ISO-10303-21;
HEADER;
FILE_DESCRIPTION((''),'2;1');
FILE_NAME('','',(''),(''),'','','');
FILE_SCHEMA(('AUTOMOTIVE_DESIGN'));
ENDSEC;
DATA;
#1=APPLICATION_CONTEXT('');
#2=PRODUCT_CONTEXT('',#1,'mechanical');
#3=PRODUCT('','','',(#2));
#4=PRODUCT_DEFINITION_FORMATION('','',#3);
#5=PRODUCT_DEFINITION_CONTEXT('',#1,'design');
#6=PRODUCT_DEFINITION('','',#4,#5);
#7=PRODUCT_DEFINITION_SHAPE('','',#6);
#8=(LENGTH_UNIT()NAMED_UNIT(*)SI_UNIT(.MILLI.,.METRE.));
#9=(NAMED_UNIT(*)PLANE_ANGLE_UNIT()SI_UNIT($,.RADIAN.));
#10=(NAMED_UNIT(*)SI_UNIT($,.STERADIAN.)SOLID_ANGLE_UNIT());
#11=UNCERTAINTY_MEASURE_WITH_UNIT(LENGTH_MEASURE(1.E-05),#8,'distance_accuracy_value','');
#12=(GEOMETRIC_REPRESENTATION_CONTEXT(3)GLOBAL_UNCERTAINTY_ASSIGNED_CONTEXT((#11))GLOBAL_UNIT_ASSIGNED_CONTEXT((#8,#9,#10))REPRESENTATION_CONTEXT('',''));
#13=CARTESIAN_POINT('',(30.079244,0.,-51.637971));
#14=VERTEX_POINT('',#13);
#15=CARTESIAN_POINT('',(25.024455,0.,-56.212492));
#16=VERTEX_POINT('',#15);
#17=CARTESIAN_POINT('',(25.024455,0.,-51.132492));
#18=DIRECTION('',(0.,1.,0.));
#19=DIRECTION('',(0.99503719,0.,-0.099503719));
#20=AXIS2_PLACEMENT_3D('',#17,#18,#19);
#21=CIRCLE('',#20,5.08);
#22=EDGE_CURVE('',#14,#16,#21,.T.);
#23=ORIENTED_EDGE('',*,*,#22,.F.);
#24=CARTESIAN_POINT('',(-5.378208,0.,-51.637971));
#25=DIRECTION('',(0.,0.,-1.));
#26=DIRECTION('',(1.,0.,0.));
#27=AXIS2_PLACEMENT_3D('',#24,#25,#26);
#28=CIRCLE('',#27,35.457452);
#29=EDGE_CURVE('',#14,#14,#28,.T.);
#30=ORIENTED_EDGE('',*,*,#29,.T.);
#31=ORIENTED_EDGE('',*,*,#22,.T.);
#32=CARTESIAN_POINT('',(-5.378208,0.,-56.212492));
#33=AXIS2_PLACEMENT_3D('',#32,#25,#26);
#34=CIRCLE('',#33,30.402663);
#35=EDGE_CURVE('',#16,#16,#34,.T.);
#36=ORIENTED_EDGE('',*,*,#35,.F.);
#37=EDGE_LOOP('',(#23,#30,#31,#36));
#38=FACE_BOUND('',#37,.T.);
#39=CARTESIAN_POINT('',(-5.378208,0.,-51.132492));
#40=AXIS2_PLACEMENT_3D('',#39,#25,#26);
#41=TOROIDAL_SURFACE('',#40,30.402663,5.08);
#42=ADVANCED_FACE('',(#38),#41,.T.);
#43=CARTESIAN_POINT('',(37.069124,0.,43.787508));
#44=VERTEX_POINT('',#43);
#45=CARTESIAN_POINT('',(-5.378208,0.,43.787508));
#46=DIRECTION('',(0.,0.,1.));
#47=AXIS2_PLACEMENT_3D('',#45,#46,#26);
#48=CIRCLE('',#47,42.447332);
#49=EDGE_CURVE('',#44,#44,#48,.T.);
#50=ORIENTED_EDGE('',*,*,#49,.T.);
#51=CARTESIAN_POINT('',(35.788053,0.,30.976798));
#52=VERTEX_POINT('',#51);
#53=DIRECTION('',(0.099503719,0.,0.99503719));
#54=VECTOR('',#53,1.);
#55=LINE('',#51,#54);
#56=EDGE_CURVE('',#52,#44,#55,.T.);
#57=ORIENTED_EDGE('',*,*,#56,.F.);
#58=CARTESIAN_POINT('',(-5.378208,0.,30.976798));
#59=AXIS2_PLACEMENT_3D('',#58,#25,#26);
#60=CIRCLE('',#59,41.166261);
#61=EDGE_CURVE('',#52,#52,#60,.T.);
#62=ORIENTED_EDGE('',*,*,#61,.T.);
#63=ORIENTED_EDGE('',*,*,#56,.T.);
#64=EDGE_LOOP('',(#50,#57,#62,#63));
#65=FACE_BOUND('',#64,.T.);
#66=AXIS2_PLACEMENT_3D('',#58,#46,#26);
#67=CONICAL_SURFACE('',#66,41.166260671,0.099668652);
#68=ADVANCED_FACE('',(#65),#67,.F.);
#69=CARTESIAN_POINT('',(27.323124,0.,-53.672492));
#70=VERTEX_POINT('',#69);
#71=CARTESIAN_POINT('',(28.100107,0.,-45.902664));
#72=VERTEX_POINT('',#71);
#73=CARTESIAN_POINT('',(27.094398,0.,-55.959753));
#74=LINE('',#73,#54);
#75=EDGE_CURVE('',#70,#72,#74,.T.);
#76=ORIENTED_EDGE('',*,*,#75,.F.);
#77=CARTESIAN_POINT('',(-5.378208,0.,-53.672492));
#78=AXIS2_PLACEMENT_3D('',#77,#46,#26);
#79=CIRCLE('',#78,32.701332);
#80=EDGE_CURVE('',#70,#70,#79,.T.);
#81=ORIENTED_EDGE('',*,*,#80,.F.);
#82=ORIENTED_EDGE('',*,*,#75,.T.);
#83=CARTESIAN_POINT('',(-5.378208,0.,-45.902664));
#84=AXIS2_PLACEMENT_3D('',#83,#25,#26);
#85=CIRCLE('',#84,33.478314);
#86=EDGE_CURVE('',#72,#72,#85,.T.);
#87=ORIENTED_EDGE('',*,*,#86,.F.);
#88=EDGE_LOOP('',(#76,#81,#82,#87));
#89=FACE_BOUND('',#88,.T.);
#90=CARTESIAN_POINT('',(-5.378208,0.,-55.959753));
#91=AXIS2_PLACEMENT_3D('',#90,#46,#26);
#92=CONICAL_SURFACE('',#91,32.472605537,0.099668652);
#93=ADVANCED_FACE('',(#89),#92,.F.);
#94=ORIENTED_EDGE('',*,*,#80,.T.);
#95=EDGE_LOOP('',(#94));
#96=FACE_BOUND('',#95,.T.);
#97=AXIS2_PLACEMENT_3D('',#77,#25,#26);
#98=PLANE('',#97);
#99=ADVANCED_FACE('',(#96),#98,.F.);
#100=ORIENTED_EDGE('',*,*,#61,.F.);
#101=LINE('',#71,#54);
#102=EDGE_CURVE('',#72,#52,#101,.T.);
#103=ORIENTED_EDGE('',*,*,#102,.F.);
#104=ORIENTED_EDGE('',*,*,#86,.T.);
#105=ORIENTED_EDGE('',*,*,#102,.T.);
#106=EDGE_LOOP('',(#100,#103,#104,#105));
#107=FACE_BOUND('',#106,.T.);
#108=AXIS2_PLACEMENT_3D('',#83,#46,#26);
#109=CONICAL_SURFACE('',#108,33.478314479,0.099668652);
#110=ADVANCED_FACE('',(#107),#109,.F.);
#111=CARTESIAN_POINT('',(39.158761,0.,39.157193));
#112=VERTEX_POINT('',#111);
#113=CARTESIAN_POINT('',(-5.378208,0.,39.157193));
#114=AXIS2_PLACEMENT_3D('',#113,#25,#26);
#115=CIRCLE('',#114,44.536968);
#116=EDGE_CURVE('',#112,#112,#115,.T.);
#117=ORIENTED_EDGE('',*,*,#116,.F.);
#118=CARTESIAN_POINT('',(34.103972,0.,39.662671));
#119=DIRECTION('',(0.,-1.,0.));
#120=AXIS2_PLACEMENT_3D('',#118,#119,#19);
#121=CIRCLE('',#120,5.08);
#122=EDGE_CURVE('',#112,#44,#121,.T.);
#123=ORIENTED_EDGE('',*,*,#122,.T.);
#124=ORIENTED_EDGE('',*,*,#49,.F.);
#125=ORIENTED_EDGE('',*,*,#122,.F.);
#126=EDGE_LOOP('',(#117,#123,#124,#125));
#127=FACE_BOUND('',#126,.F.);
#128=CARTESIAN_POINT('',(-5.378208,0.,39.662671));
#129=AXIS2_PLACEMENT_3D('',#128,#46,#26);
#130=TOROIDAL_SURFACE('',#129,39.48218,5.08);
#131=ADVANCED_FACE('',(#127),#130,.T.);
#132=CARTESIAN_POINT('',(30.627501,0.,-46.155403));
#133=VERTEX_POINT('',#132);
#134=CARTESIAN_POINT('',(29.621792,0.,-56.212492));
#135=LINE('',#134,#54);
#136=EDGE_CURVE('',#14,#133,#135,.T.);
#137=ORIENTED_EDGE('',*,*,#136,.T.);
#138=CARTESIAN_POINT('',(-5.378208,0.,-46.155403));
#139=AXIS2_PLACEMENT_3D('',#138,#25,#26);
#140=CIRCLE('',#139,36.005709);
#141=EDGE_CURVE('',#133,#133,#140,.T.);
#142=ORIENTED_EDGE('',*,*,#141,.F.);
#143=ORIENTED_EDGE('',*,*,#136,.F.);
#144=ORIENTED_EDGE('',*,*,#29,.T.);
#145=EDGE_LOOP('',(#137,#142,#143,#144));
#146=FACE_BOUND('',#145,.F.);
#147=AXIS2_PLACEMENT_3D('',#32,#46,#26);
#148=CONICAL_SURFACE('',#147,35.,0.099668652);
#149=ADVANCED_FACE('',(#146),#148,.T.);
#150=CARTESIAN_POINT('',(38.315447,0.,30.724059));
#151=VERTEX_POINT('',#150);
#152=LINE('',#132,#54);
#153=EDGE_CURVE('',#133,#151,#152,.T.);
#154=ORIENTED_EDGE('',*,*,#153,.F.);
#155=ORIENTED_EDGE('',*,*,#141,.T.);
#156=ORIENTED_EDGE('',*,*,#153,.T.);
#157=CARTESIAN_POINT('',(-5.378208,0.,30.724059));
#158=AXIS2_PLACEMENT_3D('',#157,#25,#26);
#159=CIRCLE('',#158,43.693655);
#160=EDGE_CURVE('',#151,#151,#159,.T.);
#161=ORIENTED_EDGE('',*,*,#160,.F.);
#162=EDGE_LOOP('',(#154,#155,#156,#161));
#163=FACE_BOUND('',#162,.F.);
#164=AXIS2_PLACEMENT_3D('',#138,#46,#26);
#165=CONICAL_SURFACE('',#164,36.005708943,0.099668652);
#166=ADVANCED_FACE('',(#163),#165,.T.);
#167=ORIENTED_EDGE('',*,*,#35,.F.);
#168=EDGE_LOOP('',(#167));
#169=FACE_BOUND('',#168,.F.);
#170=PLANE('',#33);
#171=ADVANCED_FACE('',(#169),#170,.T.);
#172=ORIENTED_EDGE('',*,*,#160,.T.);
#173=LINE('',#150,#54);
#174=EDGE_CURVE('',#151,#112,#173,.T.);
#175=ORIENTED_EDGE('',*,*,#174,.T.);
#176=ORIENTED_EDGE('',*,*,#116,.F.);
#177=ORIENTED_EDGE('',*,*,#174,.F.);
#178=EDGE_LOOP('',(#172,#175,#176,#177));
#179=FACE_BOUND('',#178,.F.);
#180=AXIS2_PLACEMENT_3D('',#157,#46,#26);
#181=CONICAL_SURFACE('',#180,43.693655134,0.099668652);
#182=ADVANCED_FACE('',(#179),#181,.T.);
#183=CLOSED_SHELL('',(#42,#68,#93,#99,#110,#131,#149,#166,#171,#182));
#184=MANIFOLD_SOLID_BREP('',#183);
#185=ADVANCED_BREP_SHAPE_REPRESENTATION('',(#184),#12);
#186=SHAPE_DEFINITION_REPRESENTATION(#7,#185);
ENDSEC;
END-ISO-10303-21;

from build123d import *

# Parameters (mm, degrees)
F2_T = -2.54


# Not quite as in the source:
# - a fillet or chamfer that OpenCascade refuses, or shapes differently, is made with other operations: its cross-section is extruded or revolved along the edge and cut away or added
# - the program builds the solid bodies; features that only make, move or delete a surface that nothing else refers to are left out


with BuildPart() as f1:
    # F0 (on Front) → F1 (revolve)
    with BuildSketch(Plane.XZ):
        Polygon((39.6217921842, 43.7875076047), (-5.3782078158, 43.7875076047), (-5.3782078158, -56.2124923953), (29.6217921842, -56.2124923953), (30.6275011268, -46.1554029698), (38.3154473181, 30.724058944), align=None)
    revolve(axis=Axis((-5.3782078158, 0, -6.2124923953), (0, 0, -1)))

    # F2
    f2_openings = [f1.faces().sort_by_distance(p)[0] for p in [
        (-5.378208, 0, 43.787508),
    ]]
    offset(amount=F2_T, openings=f2_openings, kind=Kind.INTERSECTION)

    # F3: fillet of radius 5.08 on 3 edges, made by hand

    # F3_s1 → F3_t2 (revolve, cut)
    with BuildSketch(Plane.XZ):
        with BuildLine():
            ThreePointArc((30.079244295, -51.6379712879), (28.4331623981, -54.8990712658), (25.0244553687, -56.2124923953))
            Line((25.0244553687, -56.2124923953), (29.6217921842, -56.2124923953))
            Line((29.6217921842, -56.2124923953), (30.079244295, -51.6379712879))
        make_face()
    revolve(axis=Axis((-5.3782078158, 0, -56.2124923953), (0, 0, -1)), mode=Mode.SUBTRACT)

    # F3_s3 → F3_t4 (revolve, cut)
    with BuildSketch(Plane.XZ):
        with BuildLine():
            ThreePointArc((39.1587606775, 39.1571925375), (38.7342868185, 41.7523083311), (37.0691237764, 43.7875076047))
            Line((37.0691237764, 43.7875076047), (39.6217921842, 43.7875076047))
            Line((39.6217921842, 43.7875076047), (39.1587606775, 39.1571925375))
        make_face()
    revolve(axis=Axis((-5.3782078158, 0, 43.7875076047), (0, 0, -1)), mode=Mode.SUBTRACT)


solid = f1.part
